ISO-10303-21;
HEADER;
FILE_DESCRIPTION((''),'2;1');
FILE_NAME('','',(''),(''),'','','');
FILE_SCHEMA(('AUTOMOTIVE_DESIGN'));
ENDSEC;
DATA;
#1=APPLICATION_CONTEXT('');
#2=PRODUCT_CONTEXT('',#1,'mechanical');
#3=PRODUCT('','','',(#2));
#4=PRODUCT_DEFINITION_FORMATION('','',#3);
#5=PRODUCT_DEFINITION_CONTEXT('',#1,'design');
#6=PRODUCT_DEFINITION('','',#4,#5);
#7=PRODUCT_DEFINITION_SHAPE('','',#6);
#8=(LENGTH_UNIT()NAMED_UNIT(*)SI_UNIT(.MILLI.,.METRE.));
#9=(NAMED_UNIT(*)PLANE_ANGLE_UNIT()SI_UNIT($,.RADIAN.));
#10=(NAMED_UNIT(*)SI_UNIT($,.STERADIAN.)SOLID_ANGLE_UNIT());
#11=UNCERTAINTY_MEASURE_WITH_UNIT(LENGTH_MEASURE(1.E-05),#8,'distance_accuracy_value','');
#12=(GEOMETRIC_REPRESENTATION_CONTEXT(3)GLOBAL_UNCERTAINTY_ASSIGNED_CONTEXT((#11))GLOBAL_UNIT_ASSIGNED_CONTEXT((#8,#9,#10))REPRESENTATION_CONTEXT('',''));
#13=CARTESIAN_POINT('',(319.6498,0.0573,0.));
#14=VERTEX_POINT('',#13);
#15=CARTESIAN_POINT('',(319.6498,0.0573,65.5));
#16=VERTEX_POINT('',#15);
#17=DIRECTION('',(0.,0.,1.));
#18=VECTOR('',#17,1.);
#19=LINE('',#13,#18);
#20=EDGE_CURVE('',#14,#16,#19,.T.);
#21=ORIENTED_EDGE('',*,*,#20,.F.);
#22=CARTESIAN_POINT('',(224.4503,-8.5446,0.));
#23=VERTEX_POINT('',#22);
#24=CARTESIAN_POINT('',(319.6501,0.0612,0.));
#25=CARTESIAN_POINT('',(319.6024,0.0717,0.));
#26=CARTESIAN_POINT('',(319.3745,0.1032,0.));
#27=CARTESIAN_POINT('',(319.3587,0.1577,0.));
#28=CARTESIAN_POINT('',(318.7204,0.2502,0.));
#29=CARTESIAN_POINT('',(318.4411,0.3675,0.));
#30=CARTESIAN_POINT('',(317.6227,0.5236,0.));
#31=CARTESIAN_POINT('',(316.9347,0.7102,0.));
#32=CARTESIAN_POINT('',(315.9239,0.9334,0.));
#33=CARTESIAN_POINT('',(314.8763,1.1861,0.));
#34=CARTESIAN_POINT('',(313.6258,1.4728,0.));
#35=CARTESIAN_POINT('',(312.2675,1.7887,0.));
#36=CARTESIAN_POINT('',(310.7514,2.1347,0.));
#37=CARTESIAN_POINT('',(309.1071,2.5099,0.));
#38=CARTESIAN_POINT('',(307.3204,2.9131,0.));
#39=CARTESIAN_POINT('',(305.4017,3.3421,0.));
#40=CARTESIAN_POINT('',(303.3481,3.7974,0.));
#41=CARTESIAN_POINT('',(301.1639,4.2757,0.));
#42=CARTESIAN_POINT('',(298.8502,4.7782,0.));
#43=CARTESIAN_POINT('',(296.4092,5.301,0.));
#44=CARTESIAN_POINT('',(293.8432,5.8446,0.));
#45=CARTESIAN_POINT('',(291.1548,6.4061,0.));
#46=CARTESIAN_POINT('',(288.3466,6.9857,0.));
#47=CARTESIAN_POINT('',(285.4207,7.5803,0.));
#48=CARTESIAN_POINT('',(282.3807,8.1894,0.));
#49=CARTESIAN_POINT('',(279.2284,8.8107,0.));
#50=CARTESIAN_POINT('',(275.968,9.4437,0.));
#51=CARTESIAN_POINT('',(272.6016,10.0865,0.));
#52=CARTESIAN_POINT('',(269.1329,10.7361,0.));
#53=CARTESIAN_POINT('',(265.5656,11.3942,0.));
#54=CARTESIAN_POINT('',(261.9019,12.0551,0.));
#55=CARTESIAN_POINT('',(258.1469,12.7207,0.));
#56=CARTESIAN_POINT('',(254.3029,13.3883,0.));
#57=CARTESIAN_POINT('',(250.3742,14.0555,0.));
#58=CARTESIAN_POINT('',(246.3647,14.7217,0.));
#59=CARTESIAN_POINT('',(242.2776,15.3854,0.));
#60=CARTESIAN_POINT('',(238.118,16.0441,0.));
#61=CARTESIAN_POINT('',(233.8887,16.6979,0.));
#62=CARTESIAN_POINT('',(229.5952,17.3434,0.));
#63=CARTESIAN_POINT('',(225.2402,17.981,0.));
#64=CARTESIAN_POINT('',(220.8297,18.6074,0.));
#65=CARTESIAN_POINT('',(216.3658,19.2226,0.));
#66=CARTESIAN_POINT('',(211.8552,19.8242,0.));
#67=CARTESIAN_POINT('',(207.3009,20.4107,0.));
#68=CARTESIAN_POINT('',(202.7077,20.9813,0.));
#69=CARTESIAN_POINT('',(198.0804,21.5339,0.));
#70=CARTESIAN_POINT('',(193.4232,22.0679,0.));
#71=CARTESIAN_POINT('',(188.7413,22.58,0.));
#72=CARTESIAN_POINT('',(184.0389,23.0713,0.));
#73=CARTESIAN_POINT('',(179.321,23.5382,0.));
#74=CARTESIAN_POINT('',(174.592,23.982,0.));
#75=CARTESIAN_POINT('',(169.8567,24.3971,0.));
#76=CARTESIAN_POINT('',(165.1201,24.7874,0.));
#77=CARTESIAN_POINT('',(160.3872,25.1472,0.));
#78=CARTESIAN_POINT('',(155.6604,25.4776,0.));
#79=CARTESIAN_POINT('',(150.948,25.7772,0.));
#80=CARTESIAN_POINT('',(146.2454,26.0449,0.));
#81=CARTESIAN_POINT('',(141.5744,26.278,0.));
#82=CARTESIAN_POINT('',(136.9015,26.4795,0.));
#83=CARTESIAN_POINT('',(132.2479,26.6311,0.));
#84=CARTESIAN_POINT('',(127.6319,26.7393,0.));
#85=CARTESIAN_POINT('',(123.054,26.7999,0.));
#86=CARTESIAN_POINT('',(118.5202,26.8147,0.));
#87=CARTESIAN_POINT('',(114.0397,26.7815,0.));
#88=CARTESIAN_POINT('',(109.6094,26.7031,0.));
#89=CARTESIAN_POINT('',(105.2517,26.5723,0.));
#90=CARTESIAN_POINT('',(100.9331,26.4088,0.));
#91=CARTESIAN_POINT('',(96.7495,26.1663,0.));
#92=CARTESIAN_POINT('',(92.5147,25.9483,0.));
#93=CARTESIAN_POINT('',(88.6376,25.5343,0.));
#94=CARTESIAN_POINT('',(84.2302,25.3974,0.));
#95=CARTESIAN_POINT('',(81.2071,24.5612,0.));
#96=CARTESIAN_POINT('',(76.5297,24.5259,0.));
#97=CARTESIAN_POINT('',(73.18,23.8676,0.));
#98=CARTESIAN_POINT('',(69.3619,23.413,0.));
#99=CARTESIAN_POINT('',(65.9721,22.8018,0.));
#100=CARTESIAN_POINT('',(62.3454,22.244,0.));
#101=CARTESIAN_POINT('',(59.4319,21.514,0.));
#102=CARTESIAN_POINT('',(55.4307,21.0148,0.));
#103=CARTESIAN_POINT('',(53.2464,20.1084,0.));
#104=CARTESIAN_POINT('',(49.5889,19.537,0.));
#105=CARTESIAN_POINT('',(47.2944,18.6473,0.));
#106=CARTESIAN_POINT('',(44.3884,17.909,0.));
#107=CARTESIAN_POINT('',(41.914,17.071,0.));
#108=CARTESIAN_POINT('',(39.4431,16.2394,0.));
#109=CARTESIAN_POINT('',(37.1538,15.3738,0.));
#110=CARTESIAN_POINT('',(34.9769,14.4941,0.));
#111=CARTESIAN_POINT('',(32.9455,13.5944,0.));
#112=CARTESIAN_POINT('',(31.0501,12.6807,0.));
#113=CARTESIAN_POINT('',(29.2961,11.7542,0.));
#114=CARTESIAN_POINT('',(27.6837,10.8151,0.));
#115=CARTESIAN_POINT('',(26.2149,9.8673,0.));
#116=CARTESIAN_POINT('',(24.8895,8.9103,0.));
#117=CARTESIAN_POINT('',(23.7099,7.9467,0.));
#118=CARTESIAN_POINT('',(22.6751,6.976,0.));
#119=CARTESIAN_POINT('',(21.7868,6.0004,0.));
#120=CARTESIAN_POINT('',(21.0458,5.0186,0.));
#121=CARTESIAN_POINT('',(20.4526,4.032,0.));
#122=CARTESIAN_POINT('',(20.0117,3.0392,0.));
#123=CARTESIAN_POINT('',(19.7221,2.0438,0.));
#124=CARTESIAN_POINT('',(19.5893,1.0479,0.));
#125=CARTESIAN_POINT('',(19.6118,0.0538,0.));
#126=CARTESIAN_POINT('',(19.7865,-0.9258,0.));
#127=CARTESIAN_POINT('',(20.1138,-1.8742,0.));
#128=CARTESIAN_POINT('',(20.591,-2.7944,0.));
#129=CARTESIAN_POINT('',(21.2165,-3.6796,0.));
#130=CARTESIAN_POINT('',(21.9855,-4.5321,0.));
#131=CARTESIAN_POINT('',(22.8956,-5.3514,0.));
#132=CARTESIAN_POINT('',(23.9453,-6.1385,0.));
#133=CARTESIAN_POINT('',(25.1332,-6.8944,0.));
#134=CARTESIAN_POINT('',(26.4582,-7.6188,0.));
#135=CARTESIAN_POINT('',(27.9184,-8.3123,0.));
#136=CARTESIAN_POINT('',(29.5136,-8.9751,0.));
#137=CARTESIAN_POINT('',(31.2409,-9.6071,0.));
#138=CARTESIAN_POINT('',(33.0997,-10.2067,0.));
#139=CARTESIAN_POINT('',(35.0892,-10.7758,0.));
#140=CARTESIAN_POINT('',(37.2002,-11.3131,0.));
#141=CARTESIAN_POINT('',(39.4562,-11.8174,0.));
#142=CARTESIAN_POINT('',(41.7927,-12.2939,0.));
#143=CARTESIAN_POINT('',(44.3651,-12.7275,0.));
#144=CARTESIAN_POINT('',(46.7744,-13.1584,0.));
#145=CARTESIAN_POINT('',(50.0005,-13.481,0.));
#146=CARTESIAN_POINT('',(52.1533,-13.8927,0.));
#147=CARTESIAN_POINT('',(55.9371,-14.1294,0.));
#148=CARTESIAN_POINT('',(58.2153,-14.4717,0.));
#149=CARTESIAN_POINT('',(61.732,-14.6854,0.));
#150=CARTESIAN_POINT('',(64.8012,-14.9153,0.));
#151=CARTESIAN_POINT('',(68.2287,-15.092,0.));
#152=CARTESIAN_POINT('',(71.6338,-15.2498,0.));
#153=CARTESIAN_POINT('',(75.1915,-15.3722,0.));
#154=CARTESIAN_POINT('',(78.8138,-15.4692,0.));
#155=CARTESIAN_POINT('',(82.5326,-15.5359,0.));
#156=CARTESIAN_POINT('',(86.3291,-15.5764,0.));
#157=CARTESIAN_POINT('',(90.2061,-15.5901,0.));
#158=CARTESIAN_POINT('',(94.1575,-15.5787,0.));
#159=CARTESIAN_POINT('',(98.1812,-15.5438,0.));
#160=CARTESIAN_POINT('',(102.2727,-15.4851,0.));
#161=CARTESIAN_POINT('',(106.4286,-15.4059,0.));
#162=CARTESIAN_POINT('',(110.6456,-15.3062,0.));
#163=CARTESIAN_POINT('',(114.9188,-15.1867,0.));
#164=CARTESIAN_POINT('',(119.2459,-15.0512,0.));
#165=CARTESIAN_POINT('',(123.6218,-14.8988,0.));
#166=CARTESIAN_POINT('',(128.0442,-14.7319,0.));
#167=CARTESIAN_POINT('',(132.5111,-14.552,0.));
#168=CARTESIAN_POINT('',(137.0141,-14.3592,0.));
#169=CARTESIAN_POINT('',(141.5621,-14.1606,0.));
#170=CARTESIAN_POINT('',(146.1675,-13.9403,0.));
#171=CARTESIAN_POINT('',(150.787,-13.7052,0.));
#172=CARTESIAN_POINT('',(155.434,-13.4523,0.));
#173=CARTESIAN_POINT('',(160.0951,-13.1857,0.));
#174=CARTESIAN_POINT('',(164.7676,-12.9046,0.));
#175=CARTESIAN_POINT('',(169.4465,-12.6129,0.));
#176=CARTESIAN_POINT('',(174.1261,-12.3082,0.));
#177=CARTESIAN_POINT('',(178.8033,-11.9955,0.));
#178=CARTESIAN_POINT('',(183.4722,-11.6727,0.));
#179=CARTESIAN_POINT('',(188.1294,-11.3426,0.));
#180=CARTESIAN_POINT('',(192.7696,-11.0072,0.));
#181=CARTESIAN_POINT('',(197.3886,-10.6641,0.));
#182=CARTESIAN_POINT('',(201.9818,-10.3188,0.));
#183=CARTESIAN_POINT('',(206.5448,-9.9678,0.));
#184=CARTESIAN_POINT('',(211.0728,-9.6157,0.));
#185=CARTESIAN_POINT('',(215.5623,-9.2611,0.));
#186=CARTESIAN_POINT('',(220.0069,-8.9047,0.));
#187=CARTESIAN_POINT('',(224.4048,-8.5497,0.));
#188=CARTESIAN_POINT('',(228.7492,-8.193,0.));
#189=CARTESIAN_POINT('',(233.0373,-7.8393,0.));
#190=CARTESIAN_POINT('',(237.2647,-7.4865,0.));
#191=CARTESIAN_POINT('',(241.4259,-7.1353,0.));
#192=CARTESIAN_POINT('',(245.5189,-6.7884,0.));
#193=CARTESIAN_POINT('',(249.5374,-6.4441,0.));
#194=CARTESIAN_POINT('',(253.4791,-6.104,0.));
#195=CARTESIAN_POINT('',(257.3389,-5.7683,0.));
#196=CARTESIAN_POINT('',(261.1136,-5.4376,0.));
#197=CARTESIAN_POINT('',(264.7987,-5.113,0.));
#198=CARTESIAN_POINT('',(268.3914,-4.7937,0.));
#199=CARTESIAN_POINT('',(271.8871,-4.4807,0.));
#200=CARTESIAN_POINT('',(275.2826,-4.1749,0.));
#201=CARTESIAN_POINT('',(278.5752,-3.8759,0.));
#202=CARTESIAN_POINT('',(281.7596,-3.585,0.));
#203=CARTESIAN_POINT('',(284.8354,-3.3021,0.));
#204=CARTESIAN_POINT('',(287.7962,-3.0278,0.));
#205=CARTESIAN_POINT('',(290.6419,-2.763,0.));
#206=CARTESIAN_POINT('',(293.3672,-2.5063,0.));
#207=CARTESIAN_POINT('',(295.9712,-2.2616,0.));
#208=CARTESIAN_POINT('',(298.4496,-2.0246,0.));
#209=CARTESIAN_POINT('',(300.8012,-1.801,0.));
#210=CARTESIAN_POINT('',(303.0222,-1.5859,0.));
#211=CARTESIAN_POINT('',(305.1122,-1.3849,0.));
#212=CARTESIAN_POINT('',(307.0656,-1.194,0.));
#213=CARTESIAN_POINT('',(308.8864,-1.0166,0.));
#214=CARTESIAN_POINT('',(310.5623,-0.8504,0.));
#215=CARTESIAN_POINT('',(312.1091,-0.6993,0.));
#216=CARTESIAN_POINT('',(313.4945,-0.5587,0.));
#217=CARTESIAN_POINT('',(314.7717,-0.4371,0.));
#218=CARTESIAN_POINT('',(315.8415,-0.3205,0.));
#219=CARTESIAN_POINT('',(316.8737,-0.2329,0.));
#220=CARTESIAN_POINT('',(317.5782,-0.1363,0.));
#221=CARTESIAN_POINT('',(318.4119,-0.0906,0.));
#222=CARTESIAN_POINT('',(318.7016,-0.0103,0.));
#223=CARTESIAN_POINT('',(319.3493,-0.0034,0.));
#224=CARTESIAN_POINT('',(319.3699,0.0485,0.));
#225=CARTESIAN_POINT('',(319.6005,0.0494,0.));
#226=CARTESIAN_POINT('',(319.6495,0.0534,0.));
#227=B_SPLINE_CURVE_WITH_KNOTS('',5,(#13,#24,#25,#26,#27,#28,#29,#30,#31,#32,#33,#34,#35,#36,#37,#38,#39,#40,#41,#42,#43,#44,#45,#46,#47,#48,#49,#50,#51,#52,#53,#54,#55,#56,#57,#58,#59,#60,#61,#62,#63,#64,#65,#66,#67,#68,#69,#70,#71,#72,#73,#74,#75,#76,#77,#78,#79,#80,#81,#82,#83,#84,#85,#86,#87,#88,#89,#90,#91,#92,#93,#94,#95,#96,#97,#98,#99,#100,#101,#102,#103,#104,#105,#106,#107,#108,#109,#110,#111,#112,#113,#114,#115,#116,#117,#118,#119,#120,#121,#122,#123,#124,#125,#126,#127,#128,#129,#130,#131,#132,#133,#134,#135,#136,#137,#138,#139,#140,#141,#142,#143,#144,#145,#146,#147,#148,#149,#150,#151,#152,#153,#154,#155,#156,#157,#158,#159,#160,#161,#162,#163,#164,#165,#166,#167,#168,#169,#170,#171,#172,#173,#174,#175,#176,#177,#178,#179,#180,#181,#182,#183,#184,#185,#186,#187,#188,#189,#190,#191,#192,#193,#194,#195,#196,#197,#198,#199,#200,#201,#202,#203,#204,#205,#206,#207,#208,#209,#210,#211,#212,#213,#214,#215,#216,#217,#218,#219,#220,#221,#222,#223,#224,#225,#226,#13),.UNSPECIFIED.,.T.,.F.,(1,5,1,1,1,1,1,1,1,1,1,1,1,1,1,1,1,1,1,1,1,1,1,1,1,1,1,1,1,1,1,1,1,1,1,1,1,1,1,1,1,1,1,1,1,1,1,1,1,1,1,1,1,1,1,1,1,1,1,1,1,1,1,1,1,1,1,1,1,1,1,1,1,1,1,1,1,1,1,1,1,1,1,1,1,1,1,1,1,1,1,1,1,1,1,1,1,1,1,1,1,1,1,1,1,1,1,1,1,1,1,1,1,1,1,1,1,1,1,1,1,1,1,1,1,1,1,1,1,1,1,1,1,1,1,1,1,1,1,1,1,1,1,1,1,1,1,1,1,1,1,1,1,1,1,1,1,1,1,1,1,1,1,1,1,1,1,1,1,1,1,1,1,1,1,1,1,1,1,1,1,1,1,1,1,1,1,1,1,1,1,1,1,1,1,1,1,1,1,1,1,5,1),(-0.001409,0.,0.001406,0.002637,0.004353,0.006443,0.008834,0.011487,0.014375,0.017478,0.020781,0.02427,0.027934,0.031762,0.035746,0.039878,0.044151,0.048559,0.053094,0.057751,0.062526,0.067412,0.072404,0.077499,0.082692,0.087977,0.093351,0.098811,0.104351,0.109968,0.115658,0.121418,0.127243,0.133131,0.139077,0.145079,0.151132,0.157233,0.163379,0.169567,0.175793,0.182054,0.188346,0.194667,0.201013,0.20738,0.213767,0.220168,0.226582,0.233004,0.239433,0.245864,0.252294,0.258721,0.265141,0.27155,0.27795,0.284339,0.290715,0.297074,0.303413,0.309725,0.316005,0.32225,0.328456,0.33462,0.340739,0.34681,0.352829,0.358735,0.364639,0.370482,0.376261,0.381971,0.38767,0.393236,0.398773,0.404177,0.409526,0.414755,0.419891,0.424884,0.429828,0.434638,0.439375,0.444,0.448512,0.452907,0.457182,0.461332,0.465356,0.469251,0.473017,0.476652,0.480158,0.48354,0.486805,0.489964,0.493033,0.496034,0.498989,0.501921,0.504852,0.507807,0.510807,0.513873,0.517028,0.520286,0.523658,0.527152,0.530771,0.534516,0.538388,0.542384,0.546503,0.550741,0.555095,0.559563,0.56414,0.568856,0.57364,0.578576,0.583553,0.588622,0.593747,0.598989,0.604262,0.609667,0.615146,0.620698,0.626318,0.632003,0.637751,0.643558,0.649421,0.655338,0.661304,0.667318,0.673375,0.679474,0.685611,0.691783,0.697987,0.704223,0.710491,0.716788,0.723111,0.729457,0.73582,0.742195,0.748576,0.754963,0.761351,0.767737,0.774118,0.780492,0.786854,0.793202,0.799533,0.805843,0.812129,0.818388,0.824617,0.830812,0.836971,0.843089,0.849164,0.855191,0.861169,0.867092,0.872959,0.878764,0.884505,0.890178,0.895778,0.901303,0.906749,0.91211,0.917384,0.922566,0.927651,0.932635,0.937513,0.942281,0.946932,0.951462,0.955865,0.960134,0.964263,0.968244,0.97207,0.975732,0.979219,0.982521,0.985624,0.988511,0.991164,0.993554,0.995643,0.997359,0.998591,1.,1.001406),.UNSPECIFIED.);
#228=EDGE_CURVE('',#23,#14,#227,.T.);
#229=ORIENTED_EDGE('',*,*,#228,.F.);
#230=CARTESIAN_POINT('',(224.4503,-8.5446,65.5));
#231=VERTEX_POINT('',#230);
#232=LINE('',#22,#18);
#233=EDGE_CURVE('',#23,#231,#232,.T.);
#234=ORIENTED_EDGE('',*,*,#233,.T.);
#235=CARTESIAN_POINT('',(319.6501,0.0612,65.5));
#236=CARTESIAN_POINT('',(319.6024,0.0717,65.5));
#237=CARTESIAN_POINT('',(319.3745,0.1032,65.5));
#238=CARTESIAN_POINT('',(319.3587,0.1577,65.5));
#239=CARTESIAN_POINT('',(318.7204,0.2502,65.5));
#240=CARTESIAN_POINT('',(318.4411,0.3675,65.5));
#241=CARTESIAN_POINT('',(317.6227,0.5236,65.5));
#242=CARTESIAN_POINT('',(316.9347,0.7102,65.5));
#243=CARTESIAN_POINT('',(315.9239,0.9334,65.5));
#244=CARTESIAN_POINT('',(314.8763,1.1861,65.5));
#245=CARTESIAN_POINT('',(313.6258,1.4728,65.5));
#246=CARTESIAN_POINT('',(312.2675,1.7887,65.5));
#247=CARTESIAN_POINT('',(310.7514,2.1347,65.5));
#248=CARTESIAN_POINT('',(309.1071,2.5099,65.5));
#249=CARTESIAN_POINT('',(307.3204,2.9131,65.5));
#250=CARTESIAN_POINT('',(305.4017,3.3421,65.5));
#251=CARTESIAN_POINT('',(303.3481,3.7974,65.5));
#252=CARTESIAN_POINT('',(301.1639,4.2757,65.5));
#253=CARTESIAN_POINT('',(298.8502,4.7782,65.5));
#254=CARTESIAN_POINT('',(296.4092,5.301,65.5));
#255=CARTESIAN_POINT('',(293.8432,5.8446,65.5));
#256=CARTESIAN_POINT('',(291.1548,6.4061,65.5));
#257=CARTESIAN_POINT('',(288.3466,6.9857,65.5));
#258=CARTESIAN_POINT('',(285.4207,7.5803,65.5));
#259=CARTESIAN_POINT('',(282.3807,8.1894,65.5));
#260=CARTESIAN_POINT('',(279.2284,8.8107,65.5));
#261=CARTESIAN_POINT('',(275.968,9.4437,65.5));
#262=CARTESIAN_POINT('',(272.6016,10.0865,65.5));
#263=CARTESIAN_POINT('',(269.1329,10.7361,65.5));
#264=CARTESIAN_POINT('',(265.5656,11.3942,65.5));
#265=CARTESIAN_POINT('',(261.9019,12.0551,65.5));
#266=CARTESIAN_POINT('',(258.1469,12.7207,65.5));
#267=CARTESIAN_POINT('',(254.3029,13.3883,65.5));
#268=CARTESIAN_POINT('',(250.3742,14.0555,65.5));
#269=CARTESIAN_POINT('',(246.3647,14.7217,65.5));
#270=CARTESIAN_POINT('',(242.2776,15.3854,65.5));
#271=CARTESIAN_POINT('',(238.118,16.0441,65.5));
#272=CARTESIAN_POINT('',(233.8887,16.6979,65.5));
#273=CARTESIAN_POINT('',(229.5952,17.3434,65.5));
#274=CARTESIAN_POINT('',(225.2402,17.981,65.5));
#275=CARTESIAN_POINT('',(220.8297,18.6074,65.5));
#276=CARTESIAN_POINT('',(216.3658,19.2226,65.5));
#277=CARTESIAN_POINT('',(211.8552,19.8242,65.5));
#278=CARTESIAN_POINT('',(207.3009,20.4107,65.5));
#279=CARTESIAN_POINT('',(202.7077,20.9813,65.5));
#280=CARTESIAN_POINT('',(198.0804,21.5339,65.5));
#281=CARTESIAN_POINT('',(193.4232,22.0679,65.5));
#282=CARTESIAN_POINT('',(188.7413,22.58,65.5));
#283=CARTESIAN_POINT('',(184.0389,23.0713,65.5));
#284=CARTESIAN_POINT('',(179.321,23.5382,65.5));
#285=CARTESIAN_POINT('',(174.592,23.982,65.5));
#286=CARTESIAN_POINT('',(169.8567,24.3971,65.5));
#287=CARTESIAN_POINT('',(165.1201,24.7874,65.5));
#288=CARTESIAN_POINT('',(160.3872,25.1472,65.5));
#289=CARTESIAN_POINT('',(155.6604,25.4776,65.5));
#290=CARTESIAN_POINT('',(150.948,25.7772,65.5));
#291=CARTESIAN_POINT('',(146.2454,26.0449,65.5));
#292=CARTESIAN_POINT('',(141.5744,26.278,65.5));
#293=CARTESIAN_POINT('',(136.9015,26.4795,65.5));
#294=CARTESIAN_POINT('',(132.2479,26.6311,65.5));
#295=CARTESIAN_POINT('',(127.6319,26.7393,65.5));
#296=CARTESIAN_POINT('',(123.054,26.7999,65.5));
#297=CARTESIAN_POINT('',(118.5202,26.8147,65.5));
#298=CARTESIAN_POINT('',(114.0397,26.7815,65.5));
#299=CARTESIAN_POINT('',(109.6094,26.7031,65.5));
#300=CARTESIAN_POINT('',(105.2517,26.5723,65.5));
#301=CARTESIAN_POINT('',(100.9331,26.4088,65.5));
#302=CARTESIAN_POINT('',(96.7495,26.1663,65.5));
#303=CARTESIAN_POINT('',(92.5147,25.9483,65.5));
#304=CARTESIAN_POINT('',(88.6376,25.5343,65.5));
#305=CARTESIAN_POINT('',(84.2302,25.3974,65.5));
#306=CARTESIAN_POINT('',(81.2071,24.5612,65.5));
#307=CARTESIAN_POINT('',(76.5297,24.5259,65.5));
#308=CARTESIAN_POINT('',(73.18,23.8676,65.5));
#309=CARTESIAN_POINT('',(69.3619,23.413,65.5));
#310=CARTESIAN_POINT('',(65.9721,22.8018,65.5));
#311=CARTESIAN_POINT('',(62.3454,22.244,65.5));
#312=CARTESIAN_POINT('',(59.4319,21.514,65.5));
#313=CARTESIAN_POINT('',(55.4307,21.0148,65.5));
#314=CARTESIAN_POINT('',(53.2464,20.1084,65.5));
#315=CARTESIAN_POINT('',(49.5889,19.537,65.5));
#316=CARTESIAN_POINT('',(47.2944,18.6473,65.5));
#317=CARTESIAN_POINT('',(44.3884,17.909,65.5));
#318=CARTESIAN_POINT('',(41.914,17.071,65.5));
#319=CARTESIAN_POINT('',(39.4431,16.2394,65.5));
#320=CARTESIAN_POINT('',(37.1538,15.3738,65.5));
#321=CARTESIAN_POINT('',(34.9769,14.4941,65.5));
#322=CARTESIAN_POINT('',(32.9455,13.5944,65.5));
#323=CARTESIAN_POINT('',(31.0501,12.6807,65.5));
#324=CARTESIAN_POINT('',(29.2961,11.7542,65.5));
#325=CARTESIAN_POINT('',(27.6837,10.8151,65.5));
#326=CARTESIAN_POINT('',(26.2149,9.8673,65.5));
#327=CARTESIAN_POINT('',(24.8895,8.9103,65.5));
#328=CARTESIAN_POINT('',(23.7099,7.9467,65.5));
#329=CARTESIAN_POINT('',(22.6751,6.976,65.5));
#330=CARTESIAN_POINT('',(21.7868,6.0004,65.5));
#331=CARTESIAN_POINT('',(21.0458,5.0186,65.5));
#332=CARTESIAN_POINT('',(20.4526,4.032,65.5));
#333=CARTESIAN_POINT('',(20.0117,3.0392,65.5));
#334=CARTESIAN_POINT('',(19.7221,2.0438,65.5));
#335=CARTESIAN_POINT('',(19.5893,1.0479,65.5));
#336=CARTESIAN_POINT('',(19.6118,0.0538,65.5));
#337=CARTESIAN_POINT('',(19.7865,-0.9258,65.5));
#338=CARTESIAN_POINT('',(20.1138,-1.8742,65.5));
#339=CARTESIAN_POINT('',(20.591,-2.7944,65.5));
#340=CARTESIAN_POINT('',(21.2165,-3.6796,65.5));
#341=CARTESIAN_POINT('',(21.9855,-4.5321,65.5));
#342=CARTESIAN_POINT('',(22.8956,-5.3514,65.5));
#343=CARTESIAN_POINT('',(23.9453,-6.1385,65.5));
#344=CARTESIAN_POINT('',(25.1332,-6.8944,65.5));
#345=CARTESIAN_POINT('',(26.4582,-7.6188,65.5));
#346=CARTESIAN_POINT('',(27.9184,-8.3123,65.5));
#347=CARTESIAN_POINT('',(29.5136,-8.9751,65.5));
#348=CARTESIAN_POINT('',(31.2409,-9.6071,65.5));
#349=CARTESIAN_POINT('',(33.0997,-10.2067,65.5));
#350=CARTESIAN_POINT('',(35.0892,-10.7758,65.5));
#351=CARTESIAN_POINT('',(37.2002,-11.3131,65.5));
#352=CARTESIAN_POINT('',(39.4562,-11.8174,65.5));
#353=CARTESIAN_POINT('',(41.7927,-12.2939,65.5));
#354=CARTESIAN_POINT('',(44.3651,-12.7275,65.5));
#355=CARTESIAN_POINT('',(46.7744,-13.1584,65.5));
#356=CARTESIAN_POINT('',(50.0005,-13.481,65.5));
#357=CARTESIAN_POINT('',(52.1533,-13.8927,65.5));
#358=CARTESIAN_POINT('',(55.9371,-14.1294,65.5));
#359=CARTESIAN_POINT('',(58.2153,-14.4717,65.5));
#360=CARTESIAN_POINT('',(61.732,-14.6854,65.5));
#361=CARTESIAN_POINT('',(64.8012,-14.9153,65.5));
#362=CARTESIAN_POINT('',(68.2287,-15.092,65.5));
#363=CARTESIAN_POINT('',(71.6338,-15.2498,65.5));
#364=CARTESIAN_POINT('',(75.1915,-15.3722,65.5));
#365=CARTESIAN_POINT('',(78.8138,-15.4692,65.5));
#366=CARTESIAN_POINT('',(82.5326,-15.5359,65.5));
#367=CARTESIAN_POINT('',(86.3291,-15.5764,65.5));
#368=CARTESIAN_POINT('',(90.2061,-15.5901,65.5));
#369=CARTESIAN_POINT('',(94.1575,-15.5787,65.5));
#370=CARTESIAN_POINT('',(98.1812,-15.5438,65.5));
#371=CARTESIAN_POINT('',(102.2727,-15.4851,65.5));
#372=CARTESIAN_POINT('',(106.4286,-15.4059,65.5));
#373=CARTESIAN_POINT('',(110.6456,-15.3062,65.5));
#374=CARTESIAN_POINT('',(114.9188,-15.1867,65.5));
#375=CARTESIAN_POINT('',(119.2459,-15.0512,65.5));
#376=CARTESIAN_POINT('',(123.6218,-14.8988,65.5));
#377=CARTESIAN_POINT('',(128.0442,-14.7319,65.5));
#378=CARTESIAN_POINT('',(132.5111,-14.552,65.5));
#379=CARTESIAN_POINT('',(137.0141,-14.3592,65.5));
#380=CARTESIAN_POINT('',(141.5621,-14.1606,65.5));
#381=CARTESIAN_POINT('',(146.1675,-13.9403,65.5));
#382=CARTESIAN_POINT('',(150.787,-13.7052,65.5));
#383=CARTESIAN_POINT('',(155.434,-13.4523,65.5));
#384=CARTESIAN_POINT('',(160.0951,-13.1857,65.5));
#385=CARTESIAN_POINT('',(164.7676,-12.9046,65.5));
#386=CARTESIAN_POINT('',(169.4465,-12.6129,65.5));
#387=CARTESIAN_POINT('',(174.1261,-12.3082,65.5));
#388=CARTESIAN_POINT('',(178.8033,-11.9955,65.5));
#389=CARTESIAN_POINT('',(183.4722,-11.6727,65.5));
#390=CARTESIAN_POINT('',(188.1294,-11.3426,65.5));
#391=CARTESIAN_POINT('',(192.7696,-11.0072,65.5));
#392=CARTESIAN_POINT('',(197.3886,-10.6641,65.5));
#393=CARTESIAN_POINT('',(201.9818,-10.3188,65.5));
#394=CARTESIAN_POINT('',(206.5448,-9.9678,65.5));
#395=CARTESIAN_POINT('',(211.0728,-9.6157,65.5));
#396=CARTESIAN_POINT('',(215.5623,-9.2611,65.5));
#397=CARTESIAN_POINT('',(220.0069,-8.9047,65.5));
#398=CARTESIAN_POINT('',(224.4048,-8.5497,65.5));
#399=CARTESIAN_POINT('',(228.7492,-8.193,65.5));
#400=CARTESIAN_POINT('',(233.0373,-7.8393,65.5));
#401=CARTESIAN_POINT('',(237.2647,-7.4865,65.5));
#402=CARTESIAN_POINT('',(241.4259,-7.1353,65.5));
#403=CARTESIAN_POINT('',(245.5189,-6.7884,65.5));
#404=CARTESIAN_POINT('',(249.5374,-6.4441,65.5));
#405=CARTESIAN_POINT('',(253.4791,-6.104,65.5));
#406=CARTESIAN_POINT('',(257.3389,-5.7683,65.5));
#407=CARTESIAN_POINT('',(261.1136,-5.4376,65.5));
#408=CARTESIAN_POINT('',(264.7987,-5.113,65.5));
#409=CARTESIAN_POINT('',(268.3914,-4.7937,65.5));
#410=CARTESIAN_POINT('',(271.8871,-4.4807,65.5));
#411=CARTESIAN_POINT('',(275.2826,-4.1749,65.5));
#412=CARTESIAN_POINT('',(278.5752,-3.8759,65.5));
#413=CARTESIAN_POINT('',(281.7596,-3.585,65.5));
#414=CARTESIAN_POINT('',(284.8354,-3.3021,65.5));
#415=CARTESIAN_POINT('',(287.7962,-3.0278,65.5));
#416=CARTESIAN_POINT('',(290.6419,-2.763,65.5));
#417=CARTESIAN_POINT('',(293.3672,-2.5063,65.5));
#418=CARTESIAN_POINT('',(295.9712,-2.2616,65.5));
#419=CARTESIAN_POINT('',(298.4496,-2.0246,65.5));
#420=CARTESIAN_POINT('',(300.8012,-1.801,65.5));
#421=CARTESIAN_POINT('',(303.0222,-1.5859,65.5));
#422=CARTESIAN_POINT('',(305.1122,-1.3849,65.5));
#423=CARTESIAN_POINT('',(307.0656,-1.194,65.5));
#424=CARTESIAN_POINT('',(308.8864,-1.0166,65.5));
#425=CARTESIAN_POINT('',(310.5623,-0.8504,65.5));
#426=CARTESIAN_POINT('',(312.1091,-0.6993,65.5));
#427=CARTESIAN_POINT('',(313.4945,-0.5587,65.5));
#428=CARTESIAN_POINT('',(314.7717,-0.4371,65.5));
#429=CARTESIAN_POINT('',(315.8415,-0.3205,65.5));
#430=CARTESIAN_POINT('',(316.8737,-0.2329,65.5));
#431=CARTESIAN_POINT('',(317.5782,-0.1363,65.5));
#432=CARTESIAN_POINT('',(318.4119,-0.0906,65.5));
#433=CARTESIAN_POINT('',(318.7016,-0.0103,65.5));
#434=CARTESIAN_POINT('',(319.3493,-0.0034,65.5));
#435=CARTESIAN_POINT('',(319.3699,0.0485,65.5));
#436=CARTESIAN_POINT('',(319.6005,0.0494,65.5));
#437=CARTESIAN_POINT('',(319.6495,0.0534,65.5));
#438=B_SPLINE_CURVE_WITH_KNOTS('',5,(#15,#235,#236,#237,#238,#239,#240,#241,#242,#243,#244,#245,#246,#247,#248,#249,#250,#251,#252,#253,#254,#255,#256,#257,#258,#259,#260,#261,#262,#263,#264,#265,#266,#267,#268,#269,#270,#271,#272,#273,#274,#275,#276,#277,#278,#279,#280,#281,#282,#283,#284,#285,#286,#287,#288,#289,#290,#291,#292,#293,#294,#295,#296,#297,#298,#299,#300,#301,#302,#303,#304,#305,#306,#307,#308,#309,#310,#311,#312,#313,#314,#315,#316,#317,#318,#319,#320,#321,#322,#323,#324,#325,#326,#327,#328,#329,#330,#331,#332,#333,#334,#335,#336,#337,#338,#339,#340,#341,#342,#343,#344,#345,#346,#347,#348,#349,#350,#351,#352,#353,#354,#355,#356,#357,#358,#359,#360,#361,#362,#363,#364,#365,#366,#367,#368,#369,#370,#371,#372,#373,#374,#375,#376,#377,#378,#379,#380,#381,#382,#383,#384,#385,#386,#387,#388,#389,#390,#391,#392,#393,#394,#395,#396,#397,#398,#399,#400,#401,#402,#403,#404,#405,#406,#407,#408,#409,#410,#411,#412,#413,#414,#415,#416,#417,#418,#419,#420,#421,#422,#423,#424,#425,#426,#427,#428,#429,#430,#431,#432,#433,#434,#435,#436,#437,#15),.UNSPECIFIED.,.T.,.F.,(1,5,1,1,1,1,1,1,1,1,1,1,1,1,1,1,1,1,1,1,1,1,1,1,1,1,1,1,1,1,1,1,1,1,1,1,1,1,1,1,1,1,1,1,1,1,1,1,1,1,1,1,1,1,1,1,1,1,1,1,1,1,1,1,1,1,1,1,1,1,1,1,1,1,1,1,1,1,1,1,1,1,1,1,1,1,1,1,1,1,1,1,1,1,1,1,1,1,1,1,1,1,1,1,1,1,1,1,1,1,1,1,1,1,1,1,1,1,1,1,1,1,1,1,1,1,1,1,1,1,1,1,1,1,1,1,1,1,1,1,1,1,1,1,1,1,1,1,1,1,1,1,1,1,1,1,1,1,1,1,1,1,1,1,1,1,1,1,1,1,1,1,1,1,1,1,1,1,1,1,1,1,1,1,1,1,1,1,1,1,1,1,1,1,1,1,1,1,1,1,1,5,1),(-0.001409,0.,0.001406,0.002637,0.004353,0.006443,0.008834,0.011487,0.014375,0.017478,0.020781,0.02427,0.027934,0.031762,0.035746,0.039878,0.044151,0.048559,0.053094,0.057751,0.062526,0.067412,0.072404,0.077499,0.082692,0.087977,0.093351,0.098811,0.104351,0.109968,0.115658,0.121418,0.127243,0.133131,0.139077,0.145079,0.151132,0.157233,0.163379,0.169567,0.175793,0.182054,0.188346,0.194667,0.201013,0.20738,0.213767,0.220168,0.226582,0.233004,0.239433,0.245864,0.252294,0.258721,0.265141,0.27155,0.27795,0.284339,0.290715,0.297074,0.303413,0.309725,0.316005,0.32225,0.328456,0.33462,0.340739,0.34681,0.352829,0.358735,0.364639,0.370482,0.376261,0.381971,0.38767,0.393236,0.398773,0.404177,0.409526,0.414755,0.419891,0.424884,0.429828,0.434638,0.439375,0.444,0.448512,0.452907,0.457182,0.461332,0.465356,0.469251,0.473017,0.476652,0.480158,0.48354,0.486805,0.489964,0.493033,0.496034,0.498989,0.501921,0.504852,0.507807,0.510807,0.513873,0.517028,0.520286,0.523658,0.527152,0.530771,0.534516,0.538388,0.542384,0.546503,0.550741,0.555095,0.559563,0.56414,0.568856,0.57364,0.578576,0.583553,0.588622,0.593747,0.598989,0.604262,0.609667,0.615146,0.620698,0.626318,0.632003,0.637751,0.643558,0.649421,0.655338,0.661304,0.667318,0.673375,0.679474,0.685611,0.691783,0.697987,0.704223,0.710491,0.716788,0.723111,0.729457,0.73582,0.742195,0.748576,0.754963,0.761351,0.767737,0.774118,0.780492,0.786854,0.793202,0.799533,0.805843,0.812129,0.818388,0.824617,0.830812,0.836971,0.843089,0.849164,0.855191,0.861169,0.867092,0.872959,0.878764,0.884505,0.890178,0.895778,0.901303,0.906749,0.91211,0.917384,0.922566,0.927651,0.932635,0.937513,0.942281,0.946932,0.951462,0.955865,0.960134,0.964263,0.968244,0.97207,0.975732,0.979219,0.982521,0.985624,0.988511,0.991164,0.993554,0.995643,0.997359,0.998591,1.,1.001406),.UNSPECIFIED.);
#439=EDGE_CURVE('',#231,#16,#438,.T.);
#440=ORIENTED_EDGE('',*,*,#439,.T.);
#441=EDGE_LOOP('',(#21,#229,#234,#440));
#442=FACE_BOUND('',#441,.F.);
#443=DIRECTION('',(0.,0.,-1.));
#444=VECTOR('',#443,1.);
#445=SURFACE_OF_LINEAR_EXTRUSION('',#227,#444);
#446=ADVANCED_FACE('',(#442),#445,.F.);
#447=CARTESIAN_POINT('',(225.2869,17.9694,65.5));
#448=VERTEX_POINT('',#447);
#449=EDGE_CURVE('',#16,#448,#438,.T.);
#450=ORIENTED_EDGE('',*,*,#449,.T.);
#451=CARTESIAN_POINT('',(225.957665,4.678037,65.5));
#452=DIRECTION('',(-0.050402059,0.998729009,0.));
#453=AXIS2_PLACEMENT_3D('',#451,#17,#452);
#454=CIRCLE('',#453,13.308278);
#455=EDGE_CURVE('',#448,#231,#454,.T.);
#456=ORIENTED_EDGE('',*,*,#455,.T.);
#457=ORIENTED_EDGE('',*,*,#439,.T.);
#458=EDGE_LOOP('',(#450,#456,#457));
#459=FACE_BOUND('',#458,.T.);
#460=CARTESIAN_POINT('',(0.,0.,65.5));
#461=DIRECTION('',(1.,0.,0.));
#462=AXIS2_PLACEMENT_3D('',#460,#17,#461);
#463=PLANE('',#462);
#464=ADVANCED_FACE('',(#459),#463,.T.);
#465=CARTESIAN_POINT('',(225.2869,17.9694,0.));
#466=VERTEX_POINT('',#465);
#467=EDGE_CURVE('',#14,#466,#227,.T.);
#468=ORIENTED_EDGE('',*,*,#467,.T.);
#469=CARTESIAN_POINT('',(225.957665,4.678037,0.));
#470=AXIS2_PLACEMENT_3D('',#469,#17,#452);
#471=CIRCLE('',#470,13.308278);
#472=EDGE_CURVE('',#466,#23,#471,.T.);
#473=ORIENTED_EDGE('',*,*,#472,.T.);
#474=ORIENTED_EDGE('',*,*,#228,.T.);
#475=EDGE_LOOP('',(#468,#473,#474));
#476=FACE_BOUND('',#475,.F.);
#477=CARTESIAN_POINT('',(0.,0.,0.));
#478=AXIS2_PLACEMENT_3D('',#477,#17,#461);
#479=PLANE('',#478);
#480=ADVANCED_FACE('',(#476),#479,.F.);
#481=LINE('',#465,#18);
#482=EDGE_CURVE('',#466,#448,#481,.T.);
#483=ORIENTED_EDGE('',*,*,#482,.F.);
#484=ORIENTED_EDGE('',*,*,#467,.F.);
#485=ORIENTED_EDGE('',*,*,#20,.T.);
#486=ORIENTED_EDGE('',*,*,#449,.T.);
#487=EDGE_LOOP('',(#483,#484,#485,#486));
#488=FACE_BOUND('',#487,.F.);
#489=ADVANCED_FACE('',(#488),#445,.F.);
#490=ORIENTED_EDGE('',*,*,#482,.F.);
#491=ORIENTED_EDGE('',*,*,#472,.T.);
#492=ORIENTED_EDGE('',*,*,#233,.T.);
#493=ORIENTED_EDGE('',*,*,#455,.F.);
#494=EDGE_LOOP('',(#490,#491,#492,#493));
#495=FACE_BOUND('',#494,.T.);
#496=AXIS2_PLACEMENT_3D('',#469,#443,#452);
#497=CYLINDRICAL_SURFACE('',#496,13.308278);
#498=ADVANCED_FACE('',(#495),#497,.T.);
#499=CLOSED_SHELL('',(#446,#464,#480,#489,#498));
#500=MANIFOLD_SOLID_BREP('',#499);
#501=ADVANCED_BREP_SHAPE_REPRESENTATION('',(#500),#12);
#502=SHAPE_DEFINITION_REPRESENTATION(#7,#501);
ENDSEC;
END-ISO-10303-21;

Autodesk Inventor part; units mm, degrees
ref_plane "YZ Plane" through (0, 0, 0) normal (1, 0, 0) x (0, 1, 0)
ref_plane "XZ Plane" through (0, 0, 0) normal (0, 1, 0) x (-1, 0, 0)
ref_plane "XY Plane" through (0, 0, 0) normal (0, 0, 1) x (1, 0, 0)
sketch "Sketch2" plane through (0, 0, 0) normal (0, 0, 1) x (1, 0, 0)
  spline S0 degree 5 poles (319.6498, 0.0573) (319.6501, 0.0612) (319.6024, 0.0717) (319.3745, 0.1032) (319.3587, 0.1577) (318.7204, 0.2502) (318.4411, 0.3675) (317.6227, 0.5236) (316.9347, 0.7102) (315.9239, 0.9334) (314.8763, 1.1861) (313.6258, 1.4728) (312.2675, 1.7887) (310.7514, 2.1347) (309.1071, 2.5099) (307.3204, 2.9131) (305.4017, 3.3421) (303.3481, 3.7974) (301.1639, 4.2757) (298.8502, 4.7782) (296.4092, 5.301) (293.8432, 5.8446) (291.1548, 6.4061) (288.3466, 6.9857) (285.4207, 7.5803) (282.3807, 8.1894) (279.2284, 8.8107) (275.968, 9.4437) (272.6016, 10.0865) (269.1329, 10.7361) (265.5656, 11.3942) (261.9019, 12.0551) (258.1469, 12.7207) (254.3029, 13.3883) (250.3742, 14.0555) (246.3647, 14.7217) (242.2776, 15.3854) (238.118, 16.0441) (233.8887, 16.6979) (229.5952, 17.3434) (225.2402, 17.981) (220.8297, 18.6074) (216.3658, 19.2226) (211.8552, 19.8242) (207.3009, 20.4107) (202.7077, 20.9813) (198.0804, 21.5339) (193.4232, 22.0679) (188.7413, 22.58) (184.0389, 23.0713) (179.321, 23.5382) (174.592, 23.982) (169.8567, 24.3971) (165.1201, 24.7874) (160.3872, 25.1472) (155.6604, 25.4776) (150.948, 25.7772) (146.2454, 26.0449) (141.5744, 26.278) (136.9015, 26.4795) (132.2479, 26.6311) (127.6319, 26.7393) (123.054, 26.7999) (118.5202, 26.8147) (114.0397, 26.7815) (109.6094, 26.7031) (105.2517, 26.5723) (100.9331, 26.4088) (96.7495, 26.1663) (92.5147, 25.9483) (88.6376, 25.5343) (84.2302, 25.3974) (81.2071, 24.5612) (76.5297, 24.5259) (73.18, 23.8676) (69.3619, 23.413) (65.9721, 22.8018) (62.3454, 22.244) (59.4319, 21.514) (55.4307, 21.0148) (53.2464, 20.1084) (49.5889, 19.537) (47.2944, 18.6473) (44.3884, 17.909) (41.914, 17.071) (39.4431, 16.2394) (37.1538, 15.3738) (34.9769, 14.4941) (32.9455, 13.5944) (31.0501, 12.6807) (29.2961, 11.7542) (27.6837, 10.8151) (26.2149, 9.8673) (24.8895, 8.9103) (23.7099, 7.9467) (22.6751, 6.976) (21.7868, 6.0004) (21.0458, 5.0186) (20.4526, 4.032) (20.0117, 3.0392) (19.7221, 2.0438) (19.5893, 1.0479) (19.6118, 0.0538) (19.7865, -0.9258) (20.1138, -1.8742) (20.591, -2.7944) (21.2165, -3.6796) (21.9855, -4.5321) (22.8956, -5.3514) (23.9453, -6.1385) (25.1332, -6.8944) (26.4582, -7.6188) (27.9184, -8.3123) (29.5136, -8.9751) (31.2409, -9.6071) (33.0997, -10.2067) (35.0892, -10.7758) (37.2002, -11.3131) (39.4562, -11.8174) (41.7927, -12.2939) (44.3651, -12.7275) (46.7744, -13.1584) (50.0005, -13.481) (52.1533, -13.8927) (55.9371, -14.1294) (58.2153, -14.4717) (61.732, -14.6854) (64.8012, -14.9153) (68.2287, -15.092) (71.6338, -15.2498) (75.1915, -15.3722) (78.8138, -15.4692) (82.5326, -15.5359) (86.3291, -15.5764) (90.2061, -15.5901) (94.1575, -15.5787) (98.1812, -15.5438) (102.2727, -15.4851) (106.4286, -15.4059) (110.6456, -15.3062) (114.9188, -15.1867) (119.2459, -15.0512) (123.6218, -14.8988) (128.0442, -14.7319) (132.5111, -14.552) (137.0141, -14.3592) (141.5621, -14.1606) (146.1675, -13.9403) (150.787, -13.7052) (155.434, -13.4523) (160.0951, -13.1857) (164.7676, -12.9046) (169.4465, -12.6129) (174.1261, -12.3082) (178.8033, -11.9955) (183.4722, -11.6727) (188.1294, -11.3426) (192.7696, -11.0072) (197.3886, -10.6641) (201.9818, -10.3188) (206.5448, -9.9678) (211.0728, -9.6157) (215.5623, -9.2611) (220.0069, -8.9047) (224.4048, -8.5497) (228.7492, -8.193) (233.0373, -7.8393) (237.2647, -7.4865) (241.4259, -7.1353) (245.5189, -6.7884) (249.5374, -6.4441) (253.4791, -6.104) (257.3389, -5.7683) (261.1136, -5.4376) (264.7987, -5.113) (268.3914, -4.7937) (271.8871, -4.4807) (275.2826, -4.1749) (278.5752, -3.8759) (281.7596, -3.585) (284.8354, -3.3021) (287.7962, -3.0278) (290.6419, -2.763) (293.3672, -2.5063) (295.9712, -2.2616) (298.4496, -2.0246) (300.8012, -1.801) (303.0222, -1.5859) (305.1122, -1.3849) (307.0656, -1.194) (308.8864, -1.0166) (310.5623, -0.8504) (312.1091, -0.6993) (313.4945, -0.5587) (314.7717, -0.4371) (315.8415, -0.3205) (316.8737, -0.2329) (317.5782, -0.1363) (318.4119, -0.0906) (318.7016, -0.0103) (319.3493, -0.0034) (319.3699, 0.0485) (319.6005, 0.0494) (319.6495, 0.0534) (319.6498, 0.0573) knots 0 0 0 0 0 0 0.001406 0.002637 0.004353 0.006443 0.008834 0.011487 0.014375 0.017478 0.020781 0.02427 0.027934 0.031762 0.035746 0.039878 0.044151 0.048559 0.053094 0.057751 0.062526 0.067412 0.072404 0.077499 0.082692 0.087977 0.093351 0.098811 0.104351 0.109968 0.115658 0.121418 0.127243 0.133131 0.139077 0.145079 0.151132 0.157233 0.163379 0.169567 0.175793 0.182054 0.188346 0.194667 0.201013 0.20738 0.213767 0.220168 0.226582 0.233004 0.239433 0.245864 0.252294 0.258721 0.265141 0.27155 0.27795 0.284339 0.290715 0.297074 0.303413 0.309725 0.316005 0.32225 0.328456 0.33462 0.340739 0.34681 0.352829 0.358735 0.364639 0.370482 0.376261 0.381971 0.38767 0.393236 0.398773 0.404177 0.409526 0.414755 0.419891 0.424884 0.429828 0.434638 0.439375 0.444 0.448512 0.452907 0.457182 0.461332 0.465356 0.469251 0.473017 0.476652 0.480158 0.48354 0.486805 0.489964 0.493033 0.496034 0.498989 0.501921 0.504852 0.507807 0.510807 0.513873 0.517028 0.520286 0.523658 0.527152 0.530771 0.534516 0.538388 0.542384 0.546503 0.550741 0.555095 0.559563 0.56414 0.568856 0.57364 0.578576 0.583553 0.588622 0.593747 0.598989 0.604262 0.609667 0.615146 0.620698 0.626318 0.632003 0.637751 0.643558 0.649421 0.655338 0.661304 0.667318 0.673375 0.679474 0.685611 0.691783 0.697987 0.704223 0.710491 0.716788 0.723111 0.729457 0.73582 0.742195 0.748576 0.754963 0.761351 0.767737 0.774118 0.780492 0.786854 0.793202 0.799533 0.805843 0.812129 0.818388 0.824617 0.830812 0.836971 0.843089 0.849164 0.855191 0.861169 0.867092 0.872959 0.878764 0.884505 0.890178 0.895778 0.901303 0.906749 0.91211 0.917384 0.922566 0.927651 0.932635 0.937513 0.942281 0.946932 0.951462 0.955865 0.960134 0.964263 0.968244 0.97207 0.975732 0.979219 0.982521 0.985624 0.988511 0.991164 0.993554 0.995643 0.997359 0.998591 1 1 1 1 1 1
  circle A0 centre (83.0595, 4.5678) radius 11.5675
  line L0 (83.0595, 4.5678) -> (83.0595, 25.0384) construction
  line L1 (83.0595, 4.5678) -> (209.6498, 4.5678) construction
  line L2 (319.6498, 0.0573) -> (219.6498, 0.0573) construction
  line L3 (219.6499, 18.7671) -> (219.6499, -8.9327) construction
  line L4 (28.0055, 4.5054) -> (28.0055, -2.4946)
  line L5 (19.627, 1.0326) -> (319.6498, 0.0573) construction
  line L6 (49.7105, 14.4213) -> (55.6079, 14.4213)
  line L7 (49.7104, -8.4915) -> (55.6078, -8.4915)
  line L8 (28.0055, 4.5054) -> (49.7105, 14.4213)
  line L9 (28.0055, -2.4946) -> (49.7104, -8.4915)
  line L10 (55.6079, 14.4213) -> (55.6079, 20.8726)
  line L11 (55.6078, -8.4915) -> (55.6078, -14.1513)
  line L12 (108.6496, 16.3299) -> (108.6496, -7.1942)
  line L13 (110.8735, -9.1817) -> (193.8736, 0.1678)
  line L14 (195.6498, 2.1552) -> (195.6498, 6.9805)
  line L15 (193.8736, 8.9679) -> (110.8735, 18.3173)
  arc A1 (110.8735, 18.3173) -> (108.6496, 16.3299) centre (110.6496, 16.3299) ccw
  arc A2 (108.6496, -7.1942) -> (110.8735, -9.1817) centre (110.6496, -7.1942) ccw
  arc A3 (193.8736, 0.1678) -> (195.6498, 2.1552) centre (193.6498, 2.1552) ccw
  arc A4 (195.6498, 6.9805) -> (193.8736, 8.9679) centre (193.6498, 6.9805) ccw
  circle A5 centre (209.6498, 0.0573) radius 3
  arc A6 (225.2869, 17.9694) -> (224.4503, -8.5446) centre (225.9576, 4.6781) ccw
  point P0 (0, 0)
  point P1 (319.3573, 0.1272)
  point P2 (318.9918, 0.2142)
  point P3 (318.4802, 0.3354)
  point P4 (317.8238, 0.4911)
  point P5 (317.0222, 0.6801)
  point P6 (316.0769, 0.9024)
  point P7 (314.9885, 1.1568)
  point P8 (313.7582, 1.443)
  point P9 (312.3866, 1.7598)
  point P10 (310.8752, 2.1063)
  point P11 (309.2258, 2.4819)
  point P12 (307.4393, 2.8854)
  point P13 (305.5178, 3.3153)
  point P14 (303.4628, 3.7707)
  point P15 (301.2764, 4.2501)
  point P16 (298.9607, 4.7526)
  point P17 (296.5175, 5.2764)
  point P18 (293.9492, 5.8203)
  point P19 (291.2585, 6.3828)
  point P20 (288.4478, 6.9627)
  point P21 (285.5195, 7.5582)
  point P22 (282.4766, 8.1678)
  point P23 (279.3218, 8.79)
  point P24 (276.0584, 9.4236)
  point P25 (272.6891, 10.0668)
  point P26 (269.2175, 10.7178)
  point P27 (265.6469, 11.3757)
  point P28 (261.9803, 12.0381)
  point P29 (258.2219, 12.7041)
  point P30 (254.3747, 13.3722)
  point P31 (250.4426, 14.0403)
  point P32 (246.4295, 14.7072)
  point P33 (242.339, 15.3714)
  point P34 (238.1756, 16.0311)
  point P35 (233.9428, 16.6851)
  point P36 (229.6454, 17.3316)
  point P37 (220.8723, 18.5967)
  point P38 (216.4049, 19.2123)
  point P39 (211.8901, 19.8144)
  point P40 (207.332, 20.4015)
  point P41 (202.7347, 20.9724)
  point P42 (198.1034, 21.5256)
  point P43 (193.4423, 22.0596)
  point P44 (188.7563, 22.5726)
  point P45 (184.0499, 23.0637)
  point P46 (179.3279, 23.5314)
  point P47 (174.5948, 23.9745)
  point P48 (169.8554, 24.3909)
  point P49 (165.1148, 24.7803)
  point P50 (160.3775, 25.1406)
  point P51 (155.6479, 25.4709)
  point P52 (150.9316, 25.7703)
  point P53 (146.233, 26.0373)
  point P54 (141.557, 26.2707)
  point P55 (136.882, 26.4681)
  point P56 (132.2209, 26.6211)
  point P57 (127.5964, 26.7282)
  point P58 (123.0133, 26.7888)
  point P59 (118.4761, 26.8026)
  point P60 (113.9902, 26.7693)
  point P61 (109.5601, 26.6886)
  point P62 (105.191, 26.5611)
  point P63 (100.8866, 26.3866)
  point P64 (96.6524, 26.1647)
  point P65 (92.4927, 25.8975)
  point P66 (88.4121, 25.5832)
  point P67 (84.4152, 25.2282)
  point P68 (80.9052, 24.7441)
  point P69 (76.6873, 24.3761)
  point P70 (72.9635, 23.8905)
  point P71 (69.3402, 23.3611)
  point P72 (65.8208, 22.7938)
  point P73 (62.4086, 22.1883)
  point P74 (59.107, 21.5464)
  point P75 (52.8493, 20.1606)
  point P76 (49.7105, 19.4213)
  point P77 (47.0737, 18.6507)
  point P78 (44.3741, 17.8542)
  point P79 (41.8034, 17.0322)
  point P80 (39.3638, 16.1874)
  point P81 (37.0583, 15.3213)
  point P82 (34.8884, 14.4363)
  point P83 (32.8568, 13.534)
  point P84 (30.965, 12.6166)
  point P85 (29.2145, 11.686)
  point P86 (27.6071, 10.7437)
  point P87 (26.1443, 9.7921)
  point P88 (24.8269, 8.8324)
  point P89 (23.6566, 7.8664)
  point P90 (22.6336, 6.8953)
  point P91 (21.7591, 5.9209)
  point P92 (21.0334, 4.9441)
  point P93 (20.4571, 3.9661)
  point P94 (20.0308, 2.9875)
  point P95 (19.7539, 2.0098)
  point P96 (19.6496, 0.0573)
  point P97 (19.8205, -0.9033)
  point P98 (20.1376, -1.8357)
  point P99 (20.6002, -2.7402)
  point P100 (21.208, -3.6159)
  point P101 (21.9598, -4.4628)
  point P102 (22.8544, -5.2806)
  point P103 (23.8909, -6.069)
  point P104 (25.0681, -6.8277)
  point P105 (26.3846, -7.5561)
  point P106 (27.8384, -8.2539)
  point P107 (29.4284, -8.9211)
  point P108 (31.1522, -9.5571)
  point P109 (33.0086, -10.1613)
  point P110 (34.9949, -10.734)
  point P111 (37.1093, -11.2746)
  point P112 (39.3497, -11.7828)
  point P113 (41.7134, -12.2586)
  point P114 (44.198, -12.702)
  point P115 (46.8014, -13.1127)
  point P116 (49.7104, -13.4915)
  point P117 (52.3532, -13.8357)
  point P118 (58.3469, -14.4294)
  point P119 (61.5023, -14.6781)
  point P120 (64.7591, -14.8953)
  point P121 (68.1149, -15.0813)
  point P122 (71.5661, -15.237)
  point P123 (75.1094, -15.3627)
  point P124 (78.7418, -15.4596)
  point P125 (82.46, -15.528)
  point P126 (86.2607, -15.5691)
  point P127 (90.14, -15.5838)
  point P128 (94.0946, -15.5733)
  point P129 (98.1212, -15.5388)
  point P130 (102.2159, -15.4812)
  point P131 (106.3751, -15.4023)
  point P132 (110.5952, -15.303)
  point P133 (114.872, -15.1845)
  point P134 (119.2022, -15.0489)
  point P135 (123.5813, -14.8971)
  point P136 (128.006, -14.7306)
  point P137 (132.4718, -14.5509)
  point P138 (136.9748, -14.3598)
  point P139 (141.5285, -14.1576)
  point P140 (146.1365, -13.9383)
  point P141 (150.7679, -13.7022)
  point P142 (155.4191, -13.4499)
  point P143 (160.0853, -13.1829)
  point P144 (164.7617, -12.9024)
  point P145 (169.4444, -12.6099)
  point P146 (174.1283, -12.306)
  point P147 (178.8092, -11.9925)
  point P148 (183.4823, -11.67)
  point P149 (188.1434, -11.34)
  point P150 (192.7877, -11.0037)
  point P151 (197.4106, -10.6614)
  point P152 (202.0079, -10.3149)
  point P153 (206.5747, -9.9645)
  point P154 (211.1069, -9.6117)
  point P155 (215.5999, -9.2568)
  point P156 (220.0489, -8.9007)
  point P157 (228.7987, -8.1885)
  point P158 (233.0906, -7.8339)
  point P159 (237.3214, -7.4808)
  point P160 (241.4866, -7.1298)
  point P161 (245.5828, -6.7821)
  point P162 (249.6052, -6.4377)
  point P163 (253.5502, -6.0972)
  point P164 (257.4136, -5.7612)
  point P165 (261.1915, -5.4303)
  point P166 (264.88, -5.1051)
  point P167 (268.4758, -4.7856)
  point P168 (271.9747, -4.4724)
  point P169 (275.3734, -4.1661)
  point P170 (278.6686, -3.867)
  point P171 (281.8564, -3.5757)
  point P172 (284.9344, -3.2925)
  point P173 (287.8984, -3.018)
  point P174 (290.7463, -2.7525)
  point P175 (293.4745, -2.4963)
  point P176 (296.0806, -2.2503)
  point P177 (298.5616, -2.0142)
  point P178 (300.9151, -1.7892)
  point P179 (303.1387, -1.575)
  point P180 (305.23, -1.3728)
  point P181 (307.1866, -1.1823)
  point P182 (309.007, -1.0041)
  point P183 (310.6885, -0.8385)
  point P184 (312.2302, -0.6861)
  point P185 (313.6297, -0.5472)
  point P186 (314.8861, -0.4221)
  point P187 (315.9976, -0.3108)
  point P188 (316.9636, -0.2139)
  point P189 (317.7826, -0.1314)
  point P190 (318.4537, -0.0636)
  point P191 (318.9766, -0.0108)
  point P192 (319.3503, 0.027)
  point P193 (319.5743, 0.0498)
  point P194 (28.0055, 1.0054)
  point P195 (108.6496, 18.5678)
  point P196 (108.6496, -9.4322)
  point P197 (195.6498, 0.3678)
  point P198 (195.6498, 8.7678)
  point P199 (108.6496, 4.5678)
  dimension "d2" = 300.0001
  dimension "d22" = 100
  dimension "d23" = 7
  dimension "d24" = 5
  dimension "d25" = 5
  dimension "d30" = 28
  dimension "d31" = 8.4
  dimension "d34" = 2
  dimension "d37" = 23.135
  dimension "d43" = 63.4325
  dimension "d44" = 6
  dimension "d45" = 110
extrude "Extrusion6" add sketch "Sketch2" along normal blind 65.5 contours S0 A6
properties part number "2414 basic aerofoil" material "Polyurethane Foam"
